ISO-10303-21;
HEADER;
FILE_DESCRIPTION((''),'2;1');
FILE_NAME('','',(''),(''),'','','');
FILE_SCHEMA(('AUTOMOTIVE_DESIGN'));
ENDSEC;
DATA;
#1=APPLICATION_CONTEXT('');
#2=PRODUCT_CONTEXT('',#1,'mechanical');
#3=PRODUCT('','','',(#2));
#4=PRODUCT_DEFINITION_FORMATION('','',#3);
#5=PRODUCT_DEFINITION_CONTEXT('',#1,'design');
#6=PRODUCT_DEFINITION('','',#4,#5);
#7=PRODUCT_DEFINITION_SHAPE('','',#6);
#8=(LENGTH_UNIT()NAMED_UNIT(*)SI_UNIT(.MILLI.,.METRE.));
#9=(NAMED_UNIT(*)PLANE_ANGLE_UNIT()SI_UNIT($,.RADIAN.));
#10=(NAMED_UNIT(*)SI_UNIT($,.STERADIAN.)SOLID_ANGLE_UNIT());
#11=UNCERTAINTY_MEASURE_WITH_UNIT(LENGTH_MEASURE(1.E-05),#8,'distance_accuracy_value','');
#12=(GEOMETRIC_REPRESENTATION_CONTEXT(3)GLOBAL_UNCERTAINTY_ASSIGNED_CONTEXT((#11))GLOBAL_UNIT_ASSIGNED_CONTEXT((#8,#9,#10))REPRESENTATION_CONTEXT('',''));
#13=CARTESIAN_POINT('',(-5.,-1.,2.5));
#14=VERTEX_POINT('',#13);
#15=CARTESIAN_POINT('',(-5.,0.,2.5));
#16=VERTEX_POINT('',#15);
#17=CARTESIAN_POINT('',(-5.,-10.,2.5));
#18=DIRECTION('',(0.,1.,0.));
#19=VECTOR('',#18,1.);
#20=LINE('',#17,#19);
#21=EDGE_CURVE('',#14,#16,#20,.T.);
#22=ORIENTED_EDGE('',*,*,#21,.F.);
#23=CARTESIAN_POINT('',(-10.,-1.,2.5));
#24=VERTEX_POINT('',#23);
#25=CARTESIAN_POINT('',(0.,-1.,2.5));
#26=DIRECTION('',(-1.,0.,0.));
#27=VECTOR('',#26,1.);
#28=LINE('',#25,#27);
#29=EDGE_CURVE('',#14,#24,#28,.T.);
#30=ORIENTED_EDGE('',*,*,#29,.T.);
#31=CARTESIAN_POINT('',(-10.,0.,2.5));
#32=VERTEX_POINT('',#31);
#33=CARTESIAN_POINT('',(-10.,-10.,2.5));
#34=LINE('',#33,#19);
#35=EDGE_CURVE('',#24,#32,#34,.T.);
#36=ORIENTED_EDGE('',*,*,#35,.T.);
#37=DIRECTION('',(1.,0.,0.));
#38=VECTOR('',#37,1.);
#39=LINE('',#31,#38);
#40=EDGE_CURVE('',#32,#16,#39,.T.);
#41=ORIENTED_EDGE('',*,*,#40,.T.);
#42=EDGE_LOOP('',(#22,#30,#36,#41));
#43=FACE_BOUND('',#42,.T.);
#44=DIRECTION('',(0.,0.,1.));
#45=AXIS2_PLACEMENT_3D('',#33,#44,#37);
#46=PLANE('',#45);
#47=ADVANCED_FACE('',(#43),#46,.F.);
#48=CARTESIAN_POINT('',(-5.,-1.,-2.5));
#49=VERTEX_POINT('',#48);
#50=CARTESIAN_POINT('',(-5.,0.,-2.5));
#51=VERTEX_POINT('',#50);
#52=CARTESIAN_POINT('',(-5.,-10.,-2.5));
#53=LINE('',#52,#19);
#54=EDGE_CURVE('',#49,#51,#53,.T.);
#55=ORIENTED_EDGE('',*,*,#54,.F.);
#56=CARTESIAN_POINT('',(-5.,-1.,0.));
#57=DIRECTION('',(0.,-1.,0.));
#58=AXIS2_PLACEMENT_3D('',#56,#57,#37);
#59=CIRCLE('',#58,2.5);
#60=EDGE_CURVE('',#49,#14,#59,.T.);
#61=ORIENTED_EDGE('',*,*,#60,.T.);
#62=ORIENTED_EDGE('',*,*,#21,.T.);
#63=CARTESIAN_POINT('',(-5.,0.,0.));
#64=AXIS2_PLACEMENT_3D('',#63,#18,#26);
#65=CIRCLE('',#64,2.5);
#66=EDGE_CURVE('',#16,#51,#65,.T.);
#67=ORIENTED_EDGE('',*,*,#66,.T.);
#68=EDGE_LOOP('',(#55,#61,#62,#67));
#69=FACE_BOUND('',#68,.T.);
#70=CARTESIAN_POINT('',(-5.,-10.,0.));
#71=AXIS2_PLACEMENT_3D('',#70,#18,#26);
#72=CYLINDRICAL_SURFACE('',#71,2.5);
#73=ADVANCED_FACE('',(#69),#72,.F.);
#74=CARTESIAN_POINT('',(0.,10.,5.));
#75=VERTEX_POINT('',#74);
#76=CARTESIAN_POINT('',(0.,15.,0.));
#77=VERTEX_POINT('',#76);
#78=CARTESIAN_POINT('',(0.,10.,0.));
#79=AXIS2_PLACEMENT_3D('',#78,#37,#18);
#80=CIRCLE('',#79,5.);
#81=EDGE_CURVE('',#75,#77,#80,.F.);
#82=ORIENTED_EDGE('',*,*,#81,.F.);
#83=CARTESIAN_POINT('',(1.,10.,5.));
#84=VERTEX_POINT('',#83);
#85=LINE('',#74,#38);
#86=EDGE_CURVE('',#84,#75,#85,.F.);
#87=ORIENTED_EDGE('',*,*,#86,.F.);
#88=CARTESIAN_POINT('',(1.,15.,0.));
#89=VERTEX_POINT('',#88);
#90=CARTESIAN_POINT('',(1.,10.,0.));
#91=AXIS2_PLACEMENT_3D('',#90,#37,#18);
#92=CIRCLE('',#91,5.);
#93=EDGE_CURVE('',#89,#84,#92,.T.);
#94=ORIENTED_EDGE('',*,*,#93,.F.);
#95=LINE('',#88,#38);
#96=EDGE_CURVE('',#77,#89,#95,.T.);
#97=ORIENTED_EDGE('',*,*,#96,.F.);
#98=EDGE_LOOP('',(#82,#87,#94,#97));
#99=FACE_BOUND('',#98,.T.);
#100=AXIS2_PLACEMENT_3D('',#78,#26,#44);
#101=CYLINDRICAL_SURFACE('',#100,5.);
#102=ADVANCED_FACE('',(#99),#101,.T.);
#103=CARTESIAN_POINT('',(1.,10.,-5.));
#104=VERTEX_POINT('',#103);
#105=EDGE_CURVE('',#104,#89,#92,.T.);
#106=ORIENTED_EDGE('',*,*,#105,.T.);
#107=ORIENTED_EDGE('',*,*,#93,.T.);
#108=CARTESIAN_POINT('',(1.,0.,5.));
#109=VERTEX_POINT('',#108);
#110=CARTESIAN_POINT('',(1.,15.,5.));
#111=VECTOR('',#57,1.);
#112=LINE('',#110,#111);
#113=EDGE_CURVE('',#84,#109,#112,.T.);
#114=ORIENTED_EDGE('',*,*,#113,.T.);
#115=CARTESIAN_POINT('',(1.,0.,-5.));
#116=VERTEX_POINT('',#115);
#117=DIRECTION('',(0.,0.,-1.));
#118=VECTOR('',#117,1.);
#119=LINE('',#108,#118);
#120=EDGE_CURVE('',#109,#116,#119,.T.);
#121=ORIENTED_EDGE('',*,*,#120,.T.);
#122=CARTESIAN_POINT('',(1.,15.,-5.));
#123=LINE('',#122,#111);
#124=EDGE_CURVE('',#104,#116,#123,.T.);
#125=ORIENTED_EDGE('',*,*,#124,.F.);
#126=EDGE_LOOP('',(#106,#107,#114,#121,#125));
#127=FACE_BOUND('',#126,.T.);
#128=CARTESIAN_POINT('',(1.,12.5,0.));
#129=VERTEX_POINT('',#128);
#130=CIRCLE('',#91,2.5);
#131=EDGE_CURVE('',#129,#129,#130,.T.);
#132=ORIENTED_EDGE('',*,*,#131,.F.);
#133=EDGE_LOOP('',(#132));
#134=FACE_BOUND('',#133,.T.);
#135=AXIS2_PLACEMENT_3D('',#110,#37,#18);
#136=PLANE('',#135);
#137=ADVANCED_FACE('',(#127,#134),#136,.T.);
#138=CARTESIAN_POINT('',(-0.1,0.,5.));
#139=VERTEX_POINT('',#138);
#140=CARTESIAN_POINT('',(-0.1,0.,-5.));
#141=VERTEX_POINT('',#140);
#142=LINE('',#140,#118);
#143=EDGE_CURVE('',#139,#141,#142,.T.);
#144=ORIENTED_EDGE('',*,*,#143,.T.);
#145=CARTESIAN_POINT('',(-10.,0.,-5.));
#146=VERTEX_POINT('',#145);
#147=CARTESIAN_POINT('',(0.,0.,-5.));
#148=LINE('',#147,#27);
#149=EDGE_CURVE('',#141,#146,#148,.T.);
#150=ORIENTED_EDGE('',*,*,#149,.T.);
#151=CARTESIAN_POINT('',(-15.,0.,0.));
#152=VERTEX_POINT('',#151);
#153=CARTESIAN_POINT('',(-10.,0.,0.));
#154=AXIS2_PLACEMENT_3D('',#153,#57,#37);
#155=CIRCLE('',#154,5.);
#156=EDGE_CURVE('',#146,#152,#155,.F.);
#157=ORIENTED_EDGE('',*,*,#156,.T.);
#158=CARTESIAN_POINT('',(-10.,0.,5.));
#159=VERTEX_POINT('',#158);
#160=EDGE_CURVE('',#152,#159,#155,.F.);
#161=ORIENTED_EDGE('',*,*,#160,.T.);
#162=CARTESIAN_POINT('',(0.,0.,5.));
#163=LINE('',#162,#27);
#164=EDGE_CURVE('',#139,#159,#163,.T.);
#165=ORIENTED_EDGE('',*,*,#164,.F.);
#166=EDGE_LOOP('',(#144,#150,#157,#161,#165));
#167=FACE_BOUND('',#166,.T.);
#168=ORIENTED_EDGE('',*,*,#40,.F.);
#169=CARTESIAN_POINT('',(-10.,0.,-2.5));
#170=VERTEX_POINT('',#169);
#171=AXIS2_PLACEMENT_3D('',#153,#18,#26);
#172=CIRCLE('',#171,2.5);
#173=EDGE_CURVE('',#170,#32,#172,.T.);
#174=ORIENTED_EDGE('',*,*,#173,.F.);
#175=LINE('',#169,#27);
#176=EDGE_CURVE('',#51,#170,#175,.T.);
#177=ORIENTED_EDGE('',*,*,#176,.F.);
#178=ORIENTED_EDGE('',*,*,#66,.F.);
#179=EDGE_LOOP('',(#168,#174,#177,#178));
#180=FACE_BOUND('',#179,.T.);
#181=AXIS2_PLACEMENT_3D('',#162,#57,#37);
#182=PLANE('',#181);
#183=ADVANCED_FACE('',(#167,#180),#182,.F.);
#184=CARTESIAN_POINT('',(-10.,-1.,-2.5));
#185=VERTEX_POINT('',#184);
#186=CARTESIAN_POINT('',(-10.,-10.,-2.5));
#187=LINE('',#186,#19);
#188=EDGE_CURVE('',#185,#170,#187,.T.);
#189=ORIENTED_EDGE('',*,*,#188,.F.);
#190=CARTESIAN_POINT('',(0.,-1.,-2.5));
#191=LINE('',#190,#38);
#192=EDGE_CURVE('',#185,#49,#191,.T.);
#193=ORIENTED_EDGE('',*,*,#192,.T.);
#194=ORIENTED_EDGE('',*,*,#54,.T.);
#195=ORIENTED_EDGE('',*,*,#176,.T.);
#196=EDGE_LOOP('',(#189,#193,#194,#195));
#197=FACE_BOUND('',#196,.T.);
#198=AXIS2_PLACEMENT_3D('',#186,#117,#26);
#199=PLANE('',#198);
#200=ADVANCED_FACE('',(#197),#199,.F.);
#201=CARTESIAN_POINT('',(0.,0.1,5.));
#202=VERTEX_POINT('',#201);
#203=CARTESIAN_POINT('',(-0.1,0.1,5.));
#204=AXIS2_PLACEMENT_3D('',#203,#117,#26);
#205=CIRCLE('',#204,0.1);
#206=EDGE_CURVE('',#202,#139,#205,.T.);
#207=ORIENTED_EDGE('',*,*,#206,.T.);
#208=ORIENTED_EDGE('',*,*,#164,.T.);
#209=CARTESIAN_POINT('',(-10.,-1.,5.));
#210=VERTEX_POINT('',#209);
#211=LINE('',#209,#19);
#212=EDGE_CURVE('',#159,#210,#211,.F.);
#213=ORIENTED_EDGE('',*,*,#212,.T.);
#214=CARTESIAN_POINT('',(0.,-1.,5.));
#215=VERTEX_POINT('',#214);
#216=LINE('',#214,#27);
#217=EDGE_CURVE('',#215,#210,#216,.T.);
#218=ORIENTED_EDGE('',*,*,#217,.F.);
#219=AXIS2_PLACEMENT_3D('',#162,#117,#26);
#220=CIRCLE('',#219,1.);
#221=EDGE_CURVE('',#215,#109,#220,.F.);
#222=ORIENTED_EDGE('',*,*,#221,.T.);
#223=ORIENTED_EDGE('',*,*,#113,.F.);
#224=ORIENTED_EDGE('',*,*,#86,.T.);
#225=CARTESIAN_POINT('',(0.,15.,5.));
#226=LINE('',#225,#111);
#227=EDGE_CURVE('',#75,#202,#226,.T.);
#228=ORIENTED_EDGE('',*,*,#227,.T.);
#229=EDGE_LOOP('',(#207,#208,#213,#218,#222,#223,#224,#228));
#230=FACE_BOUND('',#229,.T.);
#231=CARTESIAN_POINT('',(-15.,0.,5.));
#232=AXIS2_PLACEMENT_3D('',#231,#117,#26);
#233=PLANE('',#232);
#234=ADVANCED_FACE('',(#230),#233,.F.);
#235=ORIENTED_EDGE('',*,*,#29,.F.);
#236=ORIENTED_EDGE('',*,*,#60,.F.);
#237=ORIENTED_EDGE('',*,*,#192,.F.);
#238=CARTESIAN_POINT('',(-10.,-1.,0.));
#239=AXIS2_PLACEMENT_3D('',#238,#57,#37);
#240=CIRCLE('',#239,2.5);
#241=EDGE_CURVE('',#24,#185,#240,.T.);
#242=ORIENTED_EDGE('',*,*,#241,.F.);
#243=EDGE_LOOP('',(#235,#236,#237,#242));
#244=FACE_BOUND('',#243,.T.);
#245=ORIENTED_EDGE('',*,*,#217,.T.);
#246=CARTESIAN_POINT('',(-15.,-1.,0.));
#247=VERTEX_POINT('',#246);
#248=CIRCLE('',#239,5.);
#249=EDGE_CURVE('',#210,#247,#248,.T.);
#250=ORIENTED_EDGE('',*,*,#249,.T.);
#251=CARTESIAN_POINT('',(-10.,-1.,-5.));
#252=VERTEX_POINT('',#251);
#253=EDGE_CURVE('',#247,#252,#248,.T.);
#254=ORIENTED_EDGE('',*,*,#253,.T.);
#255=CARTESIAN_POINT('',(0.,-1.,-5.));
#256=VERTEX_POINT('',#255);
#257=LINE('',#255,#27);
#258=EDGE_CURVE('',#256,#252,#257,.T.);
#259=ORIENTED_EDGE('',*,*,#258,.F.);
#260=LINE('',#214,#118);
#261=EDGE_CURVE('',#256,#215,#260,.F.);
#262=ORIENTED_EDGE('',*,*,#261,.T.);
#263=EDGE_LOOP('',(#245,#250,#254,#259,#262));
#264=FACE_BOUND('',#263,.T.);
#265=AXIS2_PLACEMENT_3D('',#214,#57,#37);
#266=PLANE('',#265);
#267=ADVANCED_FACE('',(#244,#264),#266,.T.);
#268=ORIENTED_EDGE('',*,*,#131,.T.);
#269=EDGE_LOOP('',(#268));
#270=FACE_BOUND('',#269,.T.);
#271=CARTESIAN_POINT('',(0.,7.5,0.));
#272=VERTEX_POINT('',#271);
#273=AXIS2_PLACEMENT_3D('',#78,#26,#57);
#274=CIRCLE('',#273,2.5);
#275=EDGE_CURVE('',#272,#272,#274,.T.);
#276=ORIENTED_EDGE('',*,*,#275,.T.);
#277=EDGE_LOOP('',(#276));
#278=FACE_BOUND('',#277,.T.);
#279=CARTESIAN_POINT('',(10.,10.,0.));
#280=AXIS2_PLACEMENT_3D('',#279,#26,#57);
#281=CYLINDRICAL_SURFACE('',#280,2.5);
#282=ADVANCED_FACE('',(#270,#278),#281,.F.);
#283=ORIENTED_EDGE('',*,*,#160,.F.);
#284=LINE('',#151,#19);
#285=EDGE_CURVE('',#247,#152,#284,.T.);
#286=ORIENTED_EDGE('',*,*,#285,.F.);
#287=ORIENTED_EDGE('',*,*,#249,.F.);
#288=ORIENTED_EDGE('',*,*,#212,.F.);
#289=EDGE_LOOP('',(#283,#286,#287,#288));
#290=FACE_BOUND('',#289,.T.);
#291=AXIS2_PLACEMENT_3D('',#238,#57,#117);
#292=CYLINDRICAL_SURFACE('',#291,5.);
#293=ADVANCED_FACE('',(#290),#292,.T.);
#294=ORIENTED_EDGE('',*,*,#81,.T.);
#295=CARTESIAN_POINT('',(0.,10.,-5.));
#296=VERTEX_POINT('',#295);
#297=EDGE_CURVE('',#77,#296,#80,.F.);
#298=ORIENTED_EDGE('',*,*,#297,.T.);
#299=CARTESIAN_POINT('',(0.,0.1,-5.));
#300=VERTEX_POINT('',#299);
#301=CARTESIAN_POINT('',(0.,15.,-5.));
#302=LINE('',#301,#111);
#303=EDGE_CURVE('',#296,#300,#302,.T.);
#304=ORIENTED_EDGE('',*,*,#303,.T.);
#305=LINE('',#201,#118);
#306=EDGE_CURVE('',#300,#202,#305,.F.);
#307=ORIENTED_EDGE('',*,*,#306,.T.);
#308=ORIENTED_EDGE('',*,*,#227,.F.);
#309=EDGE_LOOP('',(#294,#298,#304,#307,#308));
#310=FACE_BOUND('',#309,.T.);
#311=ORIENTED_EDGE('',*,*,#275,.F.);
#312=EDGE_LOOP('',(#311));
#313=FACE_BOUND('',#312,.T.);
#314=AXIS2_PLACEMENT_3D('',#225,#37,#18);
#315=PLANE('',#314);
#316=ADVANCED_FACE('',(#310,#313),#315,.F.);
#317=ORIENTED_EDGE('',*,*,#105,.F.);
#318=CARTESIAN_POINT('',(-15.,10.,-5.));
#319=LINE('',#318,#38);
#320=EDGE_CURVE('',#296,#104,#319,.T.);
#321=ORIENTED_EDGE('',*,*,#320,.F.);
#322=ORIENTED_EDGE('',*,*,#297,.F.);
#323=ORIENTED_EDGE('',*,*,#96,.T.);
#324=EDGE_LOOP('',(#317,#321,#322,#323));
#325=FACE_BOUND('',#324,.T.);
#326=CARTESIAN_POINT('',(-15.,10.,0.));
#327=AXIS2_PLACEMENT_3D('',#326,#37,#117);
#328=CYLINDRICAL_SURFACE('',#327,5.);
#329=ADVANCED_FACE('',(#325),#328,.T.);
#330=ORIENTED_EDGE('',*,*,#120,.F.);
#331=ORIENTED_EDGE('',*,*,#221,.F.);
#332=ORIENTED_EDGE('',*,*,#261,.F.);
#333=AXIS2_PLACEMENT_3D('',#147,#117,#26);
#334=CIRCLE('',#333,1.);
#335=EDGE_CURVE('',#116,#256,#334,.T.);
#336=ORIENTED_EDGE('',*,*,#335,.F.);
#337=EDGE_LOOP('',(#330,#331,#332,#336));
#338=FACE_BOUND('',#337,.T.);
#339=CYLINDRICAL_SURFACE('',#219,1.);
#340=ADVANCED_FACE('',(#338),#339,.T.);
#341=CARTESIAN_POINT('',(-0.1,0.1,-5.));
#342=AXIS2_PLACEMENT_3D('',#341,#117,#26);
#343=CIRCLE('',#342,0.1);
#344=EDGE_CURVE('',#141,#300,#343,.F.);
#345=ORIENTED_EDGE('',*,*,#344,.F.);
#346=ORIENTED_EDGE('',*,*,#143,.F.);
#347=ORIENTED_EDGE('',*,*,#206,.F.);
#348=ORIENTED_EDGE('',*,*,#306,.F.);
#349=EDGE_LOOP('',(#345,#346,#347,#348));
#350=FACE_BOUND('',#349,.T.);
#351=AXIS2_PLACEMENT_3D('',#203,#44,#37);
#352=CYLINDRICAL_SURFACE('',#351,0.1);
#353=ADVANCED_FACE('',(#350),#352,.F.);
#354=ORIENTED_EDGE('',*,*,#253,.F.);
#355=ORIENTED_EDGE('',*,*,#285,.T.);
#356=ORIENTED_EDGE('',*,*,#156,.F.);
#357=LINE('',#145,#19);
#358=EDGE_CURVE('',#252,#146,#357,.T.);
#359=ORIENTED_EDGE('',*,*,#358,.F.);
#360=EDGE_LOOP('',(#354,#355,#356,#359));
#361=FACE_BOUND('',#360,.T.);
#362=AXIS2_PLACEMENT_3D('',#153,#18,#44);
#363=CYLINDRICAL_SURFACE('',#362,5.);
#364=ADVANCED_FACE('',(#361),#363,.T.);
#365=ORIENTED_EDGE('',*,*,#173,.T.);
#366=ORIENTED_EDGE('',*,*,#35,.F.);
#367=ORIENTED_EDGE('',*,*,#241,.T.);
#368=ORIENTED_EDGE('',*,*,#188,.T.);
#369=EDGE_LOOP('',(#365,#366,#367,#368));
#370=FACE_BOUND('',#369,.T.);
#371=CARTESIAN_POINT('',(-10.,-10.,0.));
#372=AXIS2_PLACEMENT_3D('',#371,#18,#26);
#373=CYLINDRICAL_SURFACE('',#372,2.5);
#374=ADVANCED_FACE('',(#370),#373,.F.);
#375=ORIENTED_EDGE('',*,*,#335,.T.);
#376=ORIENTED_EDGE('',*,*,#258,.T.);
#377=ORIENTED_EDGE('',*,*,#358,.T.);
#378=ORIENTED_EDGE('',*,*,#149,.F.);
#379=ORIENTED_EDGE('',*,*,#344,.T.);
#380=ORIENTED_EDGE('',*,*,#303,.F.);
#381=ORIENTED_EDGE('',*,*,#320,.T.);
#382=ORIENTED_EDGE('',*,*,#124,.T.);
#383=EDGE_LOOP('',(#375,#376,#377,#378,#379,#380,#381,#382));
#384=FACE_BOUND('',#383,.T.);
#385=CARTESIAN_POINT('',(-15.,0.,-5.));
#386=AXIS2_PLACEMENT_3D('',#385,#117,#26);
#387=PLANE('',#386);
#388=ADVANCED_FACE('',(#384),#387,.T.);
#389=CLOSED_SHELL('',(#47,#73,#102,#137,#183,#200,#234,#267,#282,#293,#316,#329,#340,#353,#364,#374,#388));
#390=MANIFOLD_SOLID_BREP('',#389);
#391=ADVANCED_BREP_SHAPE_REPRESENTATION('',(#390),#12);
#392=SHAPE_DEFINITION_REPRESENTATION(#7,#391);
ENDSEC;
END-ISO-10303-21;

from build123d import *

# Parameters (mm, degrees)
LINEAR_AUSTRAGEN_D_NN1_DEPTH    = 5
VERRUNDUNG1_R                   = 5
VERRUNDUNG2_R                   = 1
VERRUNDUNG3_R                   = 0.1
SKIZZE2_R                       = 2.5
SCHNITT_LINEAR_AUSTRAGEN1_DEPTH = 10
SCHNITT_LINEAR_AUSTRAGEN2_DEPTH = 10


with BuildPart() as part:
    # Skizze1 → Linear-Austragen-Dünn1 (new, symmetric)
    with BuildSketch(Plane.XY):
        Polygon((0, 15), (0, 0), (-15, 0), (-15, -1), (1, -1), (1, 15), align=None)
    extrude(amount=LINEAR_AUSTRAGEN_D_NN1_DEPTH, both=True)

    # Verrundung1
    verrundung1_edges = [part.edges().sort_by_distance(p)[0] for p in [
        (-15, -0.5, -5),
        (-15, -0.5, 5),
        (0.5, 15, -5),
        (0.5, 15, 5),
    ]]
    fillet(verrundung1_edges, radius=VERRUNDUNG1_R - 0.0001)  # a hair under: the kernel refuses the full size

    # Verrundung2
    verrundung2_edges = [part.edges().sort_by_distance(p)[0] for p in [
        (1, -1, 0),
    ]]
    fillet(verrundung2_edges, radius=VERRUNDUNG2_R)

    # Verrundung3
    verrundung3_edges = [part.edges().sort_by_distance(p)[0] for p in [
        (0, 0, 0),
    ]]
    fillet(verrundung3_edges, radius=VERRUNDUNG3_R)

    # Skizze2 → Schnitt-Linear austragen1 (cut)
    with BuildSketch(Plane.ZY):
        with Locations(Location((0, 10, 0), (0, 0, 270))):
            Circle(SKIZZE2_R)
    extrude(amount=-SCHNITT_LINEAR_AUSTRAGEN1_DEPTH, mode=Mode.SUBTRACT)

    # Skizze3 → Schnitt-Linear austragen2 (cut)
    with BuildSketch(Plane(origin=(0, 0, 0), x_dir=(1, 0, 0), z_dir=(0, 1, 0))):
        with BuildLine():
            Line((-10, 2.5), (-5, 2.5))
            ThreePointArc((-5, 2.5), (-2.5, 0), (-5, -2.5))
            Line((-5, -2.5), (-10, -2.5))
            ThreePointArc((-10, -2.5), (-12.5, 0), (-10, 2.5))
        make_face()
    extrude(amount=-SCHNITT_LINEAR_AUSTRAGEN2_DEPTH, mode=Mode.SUBTRACT)


solid = part.part
